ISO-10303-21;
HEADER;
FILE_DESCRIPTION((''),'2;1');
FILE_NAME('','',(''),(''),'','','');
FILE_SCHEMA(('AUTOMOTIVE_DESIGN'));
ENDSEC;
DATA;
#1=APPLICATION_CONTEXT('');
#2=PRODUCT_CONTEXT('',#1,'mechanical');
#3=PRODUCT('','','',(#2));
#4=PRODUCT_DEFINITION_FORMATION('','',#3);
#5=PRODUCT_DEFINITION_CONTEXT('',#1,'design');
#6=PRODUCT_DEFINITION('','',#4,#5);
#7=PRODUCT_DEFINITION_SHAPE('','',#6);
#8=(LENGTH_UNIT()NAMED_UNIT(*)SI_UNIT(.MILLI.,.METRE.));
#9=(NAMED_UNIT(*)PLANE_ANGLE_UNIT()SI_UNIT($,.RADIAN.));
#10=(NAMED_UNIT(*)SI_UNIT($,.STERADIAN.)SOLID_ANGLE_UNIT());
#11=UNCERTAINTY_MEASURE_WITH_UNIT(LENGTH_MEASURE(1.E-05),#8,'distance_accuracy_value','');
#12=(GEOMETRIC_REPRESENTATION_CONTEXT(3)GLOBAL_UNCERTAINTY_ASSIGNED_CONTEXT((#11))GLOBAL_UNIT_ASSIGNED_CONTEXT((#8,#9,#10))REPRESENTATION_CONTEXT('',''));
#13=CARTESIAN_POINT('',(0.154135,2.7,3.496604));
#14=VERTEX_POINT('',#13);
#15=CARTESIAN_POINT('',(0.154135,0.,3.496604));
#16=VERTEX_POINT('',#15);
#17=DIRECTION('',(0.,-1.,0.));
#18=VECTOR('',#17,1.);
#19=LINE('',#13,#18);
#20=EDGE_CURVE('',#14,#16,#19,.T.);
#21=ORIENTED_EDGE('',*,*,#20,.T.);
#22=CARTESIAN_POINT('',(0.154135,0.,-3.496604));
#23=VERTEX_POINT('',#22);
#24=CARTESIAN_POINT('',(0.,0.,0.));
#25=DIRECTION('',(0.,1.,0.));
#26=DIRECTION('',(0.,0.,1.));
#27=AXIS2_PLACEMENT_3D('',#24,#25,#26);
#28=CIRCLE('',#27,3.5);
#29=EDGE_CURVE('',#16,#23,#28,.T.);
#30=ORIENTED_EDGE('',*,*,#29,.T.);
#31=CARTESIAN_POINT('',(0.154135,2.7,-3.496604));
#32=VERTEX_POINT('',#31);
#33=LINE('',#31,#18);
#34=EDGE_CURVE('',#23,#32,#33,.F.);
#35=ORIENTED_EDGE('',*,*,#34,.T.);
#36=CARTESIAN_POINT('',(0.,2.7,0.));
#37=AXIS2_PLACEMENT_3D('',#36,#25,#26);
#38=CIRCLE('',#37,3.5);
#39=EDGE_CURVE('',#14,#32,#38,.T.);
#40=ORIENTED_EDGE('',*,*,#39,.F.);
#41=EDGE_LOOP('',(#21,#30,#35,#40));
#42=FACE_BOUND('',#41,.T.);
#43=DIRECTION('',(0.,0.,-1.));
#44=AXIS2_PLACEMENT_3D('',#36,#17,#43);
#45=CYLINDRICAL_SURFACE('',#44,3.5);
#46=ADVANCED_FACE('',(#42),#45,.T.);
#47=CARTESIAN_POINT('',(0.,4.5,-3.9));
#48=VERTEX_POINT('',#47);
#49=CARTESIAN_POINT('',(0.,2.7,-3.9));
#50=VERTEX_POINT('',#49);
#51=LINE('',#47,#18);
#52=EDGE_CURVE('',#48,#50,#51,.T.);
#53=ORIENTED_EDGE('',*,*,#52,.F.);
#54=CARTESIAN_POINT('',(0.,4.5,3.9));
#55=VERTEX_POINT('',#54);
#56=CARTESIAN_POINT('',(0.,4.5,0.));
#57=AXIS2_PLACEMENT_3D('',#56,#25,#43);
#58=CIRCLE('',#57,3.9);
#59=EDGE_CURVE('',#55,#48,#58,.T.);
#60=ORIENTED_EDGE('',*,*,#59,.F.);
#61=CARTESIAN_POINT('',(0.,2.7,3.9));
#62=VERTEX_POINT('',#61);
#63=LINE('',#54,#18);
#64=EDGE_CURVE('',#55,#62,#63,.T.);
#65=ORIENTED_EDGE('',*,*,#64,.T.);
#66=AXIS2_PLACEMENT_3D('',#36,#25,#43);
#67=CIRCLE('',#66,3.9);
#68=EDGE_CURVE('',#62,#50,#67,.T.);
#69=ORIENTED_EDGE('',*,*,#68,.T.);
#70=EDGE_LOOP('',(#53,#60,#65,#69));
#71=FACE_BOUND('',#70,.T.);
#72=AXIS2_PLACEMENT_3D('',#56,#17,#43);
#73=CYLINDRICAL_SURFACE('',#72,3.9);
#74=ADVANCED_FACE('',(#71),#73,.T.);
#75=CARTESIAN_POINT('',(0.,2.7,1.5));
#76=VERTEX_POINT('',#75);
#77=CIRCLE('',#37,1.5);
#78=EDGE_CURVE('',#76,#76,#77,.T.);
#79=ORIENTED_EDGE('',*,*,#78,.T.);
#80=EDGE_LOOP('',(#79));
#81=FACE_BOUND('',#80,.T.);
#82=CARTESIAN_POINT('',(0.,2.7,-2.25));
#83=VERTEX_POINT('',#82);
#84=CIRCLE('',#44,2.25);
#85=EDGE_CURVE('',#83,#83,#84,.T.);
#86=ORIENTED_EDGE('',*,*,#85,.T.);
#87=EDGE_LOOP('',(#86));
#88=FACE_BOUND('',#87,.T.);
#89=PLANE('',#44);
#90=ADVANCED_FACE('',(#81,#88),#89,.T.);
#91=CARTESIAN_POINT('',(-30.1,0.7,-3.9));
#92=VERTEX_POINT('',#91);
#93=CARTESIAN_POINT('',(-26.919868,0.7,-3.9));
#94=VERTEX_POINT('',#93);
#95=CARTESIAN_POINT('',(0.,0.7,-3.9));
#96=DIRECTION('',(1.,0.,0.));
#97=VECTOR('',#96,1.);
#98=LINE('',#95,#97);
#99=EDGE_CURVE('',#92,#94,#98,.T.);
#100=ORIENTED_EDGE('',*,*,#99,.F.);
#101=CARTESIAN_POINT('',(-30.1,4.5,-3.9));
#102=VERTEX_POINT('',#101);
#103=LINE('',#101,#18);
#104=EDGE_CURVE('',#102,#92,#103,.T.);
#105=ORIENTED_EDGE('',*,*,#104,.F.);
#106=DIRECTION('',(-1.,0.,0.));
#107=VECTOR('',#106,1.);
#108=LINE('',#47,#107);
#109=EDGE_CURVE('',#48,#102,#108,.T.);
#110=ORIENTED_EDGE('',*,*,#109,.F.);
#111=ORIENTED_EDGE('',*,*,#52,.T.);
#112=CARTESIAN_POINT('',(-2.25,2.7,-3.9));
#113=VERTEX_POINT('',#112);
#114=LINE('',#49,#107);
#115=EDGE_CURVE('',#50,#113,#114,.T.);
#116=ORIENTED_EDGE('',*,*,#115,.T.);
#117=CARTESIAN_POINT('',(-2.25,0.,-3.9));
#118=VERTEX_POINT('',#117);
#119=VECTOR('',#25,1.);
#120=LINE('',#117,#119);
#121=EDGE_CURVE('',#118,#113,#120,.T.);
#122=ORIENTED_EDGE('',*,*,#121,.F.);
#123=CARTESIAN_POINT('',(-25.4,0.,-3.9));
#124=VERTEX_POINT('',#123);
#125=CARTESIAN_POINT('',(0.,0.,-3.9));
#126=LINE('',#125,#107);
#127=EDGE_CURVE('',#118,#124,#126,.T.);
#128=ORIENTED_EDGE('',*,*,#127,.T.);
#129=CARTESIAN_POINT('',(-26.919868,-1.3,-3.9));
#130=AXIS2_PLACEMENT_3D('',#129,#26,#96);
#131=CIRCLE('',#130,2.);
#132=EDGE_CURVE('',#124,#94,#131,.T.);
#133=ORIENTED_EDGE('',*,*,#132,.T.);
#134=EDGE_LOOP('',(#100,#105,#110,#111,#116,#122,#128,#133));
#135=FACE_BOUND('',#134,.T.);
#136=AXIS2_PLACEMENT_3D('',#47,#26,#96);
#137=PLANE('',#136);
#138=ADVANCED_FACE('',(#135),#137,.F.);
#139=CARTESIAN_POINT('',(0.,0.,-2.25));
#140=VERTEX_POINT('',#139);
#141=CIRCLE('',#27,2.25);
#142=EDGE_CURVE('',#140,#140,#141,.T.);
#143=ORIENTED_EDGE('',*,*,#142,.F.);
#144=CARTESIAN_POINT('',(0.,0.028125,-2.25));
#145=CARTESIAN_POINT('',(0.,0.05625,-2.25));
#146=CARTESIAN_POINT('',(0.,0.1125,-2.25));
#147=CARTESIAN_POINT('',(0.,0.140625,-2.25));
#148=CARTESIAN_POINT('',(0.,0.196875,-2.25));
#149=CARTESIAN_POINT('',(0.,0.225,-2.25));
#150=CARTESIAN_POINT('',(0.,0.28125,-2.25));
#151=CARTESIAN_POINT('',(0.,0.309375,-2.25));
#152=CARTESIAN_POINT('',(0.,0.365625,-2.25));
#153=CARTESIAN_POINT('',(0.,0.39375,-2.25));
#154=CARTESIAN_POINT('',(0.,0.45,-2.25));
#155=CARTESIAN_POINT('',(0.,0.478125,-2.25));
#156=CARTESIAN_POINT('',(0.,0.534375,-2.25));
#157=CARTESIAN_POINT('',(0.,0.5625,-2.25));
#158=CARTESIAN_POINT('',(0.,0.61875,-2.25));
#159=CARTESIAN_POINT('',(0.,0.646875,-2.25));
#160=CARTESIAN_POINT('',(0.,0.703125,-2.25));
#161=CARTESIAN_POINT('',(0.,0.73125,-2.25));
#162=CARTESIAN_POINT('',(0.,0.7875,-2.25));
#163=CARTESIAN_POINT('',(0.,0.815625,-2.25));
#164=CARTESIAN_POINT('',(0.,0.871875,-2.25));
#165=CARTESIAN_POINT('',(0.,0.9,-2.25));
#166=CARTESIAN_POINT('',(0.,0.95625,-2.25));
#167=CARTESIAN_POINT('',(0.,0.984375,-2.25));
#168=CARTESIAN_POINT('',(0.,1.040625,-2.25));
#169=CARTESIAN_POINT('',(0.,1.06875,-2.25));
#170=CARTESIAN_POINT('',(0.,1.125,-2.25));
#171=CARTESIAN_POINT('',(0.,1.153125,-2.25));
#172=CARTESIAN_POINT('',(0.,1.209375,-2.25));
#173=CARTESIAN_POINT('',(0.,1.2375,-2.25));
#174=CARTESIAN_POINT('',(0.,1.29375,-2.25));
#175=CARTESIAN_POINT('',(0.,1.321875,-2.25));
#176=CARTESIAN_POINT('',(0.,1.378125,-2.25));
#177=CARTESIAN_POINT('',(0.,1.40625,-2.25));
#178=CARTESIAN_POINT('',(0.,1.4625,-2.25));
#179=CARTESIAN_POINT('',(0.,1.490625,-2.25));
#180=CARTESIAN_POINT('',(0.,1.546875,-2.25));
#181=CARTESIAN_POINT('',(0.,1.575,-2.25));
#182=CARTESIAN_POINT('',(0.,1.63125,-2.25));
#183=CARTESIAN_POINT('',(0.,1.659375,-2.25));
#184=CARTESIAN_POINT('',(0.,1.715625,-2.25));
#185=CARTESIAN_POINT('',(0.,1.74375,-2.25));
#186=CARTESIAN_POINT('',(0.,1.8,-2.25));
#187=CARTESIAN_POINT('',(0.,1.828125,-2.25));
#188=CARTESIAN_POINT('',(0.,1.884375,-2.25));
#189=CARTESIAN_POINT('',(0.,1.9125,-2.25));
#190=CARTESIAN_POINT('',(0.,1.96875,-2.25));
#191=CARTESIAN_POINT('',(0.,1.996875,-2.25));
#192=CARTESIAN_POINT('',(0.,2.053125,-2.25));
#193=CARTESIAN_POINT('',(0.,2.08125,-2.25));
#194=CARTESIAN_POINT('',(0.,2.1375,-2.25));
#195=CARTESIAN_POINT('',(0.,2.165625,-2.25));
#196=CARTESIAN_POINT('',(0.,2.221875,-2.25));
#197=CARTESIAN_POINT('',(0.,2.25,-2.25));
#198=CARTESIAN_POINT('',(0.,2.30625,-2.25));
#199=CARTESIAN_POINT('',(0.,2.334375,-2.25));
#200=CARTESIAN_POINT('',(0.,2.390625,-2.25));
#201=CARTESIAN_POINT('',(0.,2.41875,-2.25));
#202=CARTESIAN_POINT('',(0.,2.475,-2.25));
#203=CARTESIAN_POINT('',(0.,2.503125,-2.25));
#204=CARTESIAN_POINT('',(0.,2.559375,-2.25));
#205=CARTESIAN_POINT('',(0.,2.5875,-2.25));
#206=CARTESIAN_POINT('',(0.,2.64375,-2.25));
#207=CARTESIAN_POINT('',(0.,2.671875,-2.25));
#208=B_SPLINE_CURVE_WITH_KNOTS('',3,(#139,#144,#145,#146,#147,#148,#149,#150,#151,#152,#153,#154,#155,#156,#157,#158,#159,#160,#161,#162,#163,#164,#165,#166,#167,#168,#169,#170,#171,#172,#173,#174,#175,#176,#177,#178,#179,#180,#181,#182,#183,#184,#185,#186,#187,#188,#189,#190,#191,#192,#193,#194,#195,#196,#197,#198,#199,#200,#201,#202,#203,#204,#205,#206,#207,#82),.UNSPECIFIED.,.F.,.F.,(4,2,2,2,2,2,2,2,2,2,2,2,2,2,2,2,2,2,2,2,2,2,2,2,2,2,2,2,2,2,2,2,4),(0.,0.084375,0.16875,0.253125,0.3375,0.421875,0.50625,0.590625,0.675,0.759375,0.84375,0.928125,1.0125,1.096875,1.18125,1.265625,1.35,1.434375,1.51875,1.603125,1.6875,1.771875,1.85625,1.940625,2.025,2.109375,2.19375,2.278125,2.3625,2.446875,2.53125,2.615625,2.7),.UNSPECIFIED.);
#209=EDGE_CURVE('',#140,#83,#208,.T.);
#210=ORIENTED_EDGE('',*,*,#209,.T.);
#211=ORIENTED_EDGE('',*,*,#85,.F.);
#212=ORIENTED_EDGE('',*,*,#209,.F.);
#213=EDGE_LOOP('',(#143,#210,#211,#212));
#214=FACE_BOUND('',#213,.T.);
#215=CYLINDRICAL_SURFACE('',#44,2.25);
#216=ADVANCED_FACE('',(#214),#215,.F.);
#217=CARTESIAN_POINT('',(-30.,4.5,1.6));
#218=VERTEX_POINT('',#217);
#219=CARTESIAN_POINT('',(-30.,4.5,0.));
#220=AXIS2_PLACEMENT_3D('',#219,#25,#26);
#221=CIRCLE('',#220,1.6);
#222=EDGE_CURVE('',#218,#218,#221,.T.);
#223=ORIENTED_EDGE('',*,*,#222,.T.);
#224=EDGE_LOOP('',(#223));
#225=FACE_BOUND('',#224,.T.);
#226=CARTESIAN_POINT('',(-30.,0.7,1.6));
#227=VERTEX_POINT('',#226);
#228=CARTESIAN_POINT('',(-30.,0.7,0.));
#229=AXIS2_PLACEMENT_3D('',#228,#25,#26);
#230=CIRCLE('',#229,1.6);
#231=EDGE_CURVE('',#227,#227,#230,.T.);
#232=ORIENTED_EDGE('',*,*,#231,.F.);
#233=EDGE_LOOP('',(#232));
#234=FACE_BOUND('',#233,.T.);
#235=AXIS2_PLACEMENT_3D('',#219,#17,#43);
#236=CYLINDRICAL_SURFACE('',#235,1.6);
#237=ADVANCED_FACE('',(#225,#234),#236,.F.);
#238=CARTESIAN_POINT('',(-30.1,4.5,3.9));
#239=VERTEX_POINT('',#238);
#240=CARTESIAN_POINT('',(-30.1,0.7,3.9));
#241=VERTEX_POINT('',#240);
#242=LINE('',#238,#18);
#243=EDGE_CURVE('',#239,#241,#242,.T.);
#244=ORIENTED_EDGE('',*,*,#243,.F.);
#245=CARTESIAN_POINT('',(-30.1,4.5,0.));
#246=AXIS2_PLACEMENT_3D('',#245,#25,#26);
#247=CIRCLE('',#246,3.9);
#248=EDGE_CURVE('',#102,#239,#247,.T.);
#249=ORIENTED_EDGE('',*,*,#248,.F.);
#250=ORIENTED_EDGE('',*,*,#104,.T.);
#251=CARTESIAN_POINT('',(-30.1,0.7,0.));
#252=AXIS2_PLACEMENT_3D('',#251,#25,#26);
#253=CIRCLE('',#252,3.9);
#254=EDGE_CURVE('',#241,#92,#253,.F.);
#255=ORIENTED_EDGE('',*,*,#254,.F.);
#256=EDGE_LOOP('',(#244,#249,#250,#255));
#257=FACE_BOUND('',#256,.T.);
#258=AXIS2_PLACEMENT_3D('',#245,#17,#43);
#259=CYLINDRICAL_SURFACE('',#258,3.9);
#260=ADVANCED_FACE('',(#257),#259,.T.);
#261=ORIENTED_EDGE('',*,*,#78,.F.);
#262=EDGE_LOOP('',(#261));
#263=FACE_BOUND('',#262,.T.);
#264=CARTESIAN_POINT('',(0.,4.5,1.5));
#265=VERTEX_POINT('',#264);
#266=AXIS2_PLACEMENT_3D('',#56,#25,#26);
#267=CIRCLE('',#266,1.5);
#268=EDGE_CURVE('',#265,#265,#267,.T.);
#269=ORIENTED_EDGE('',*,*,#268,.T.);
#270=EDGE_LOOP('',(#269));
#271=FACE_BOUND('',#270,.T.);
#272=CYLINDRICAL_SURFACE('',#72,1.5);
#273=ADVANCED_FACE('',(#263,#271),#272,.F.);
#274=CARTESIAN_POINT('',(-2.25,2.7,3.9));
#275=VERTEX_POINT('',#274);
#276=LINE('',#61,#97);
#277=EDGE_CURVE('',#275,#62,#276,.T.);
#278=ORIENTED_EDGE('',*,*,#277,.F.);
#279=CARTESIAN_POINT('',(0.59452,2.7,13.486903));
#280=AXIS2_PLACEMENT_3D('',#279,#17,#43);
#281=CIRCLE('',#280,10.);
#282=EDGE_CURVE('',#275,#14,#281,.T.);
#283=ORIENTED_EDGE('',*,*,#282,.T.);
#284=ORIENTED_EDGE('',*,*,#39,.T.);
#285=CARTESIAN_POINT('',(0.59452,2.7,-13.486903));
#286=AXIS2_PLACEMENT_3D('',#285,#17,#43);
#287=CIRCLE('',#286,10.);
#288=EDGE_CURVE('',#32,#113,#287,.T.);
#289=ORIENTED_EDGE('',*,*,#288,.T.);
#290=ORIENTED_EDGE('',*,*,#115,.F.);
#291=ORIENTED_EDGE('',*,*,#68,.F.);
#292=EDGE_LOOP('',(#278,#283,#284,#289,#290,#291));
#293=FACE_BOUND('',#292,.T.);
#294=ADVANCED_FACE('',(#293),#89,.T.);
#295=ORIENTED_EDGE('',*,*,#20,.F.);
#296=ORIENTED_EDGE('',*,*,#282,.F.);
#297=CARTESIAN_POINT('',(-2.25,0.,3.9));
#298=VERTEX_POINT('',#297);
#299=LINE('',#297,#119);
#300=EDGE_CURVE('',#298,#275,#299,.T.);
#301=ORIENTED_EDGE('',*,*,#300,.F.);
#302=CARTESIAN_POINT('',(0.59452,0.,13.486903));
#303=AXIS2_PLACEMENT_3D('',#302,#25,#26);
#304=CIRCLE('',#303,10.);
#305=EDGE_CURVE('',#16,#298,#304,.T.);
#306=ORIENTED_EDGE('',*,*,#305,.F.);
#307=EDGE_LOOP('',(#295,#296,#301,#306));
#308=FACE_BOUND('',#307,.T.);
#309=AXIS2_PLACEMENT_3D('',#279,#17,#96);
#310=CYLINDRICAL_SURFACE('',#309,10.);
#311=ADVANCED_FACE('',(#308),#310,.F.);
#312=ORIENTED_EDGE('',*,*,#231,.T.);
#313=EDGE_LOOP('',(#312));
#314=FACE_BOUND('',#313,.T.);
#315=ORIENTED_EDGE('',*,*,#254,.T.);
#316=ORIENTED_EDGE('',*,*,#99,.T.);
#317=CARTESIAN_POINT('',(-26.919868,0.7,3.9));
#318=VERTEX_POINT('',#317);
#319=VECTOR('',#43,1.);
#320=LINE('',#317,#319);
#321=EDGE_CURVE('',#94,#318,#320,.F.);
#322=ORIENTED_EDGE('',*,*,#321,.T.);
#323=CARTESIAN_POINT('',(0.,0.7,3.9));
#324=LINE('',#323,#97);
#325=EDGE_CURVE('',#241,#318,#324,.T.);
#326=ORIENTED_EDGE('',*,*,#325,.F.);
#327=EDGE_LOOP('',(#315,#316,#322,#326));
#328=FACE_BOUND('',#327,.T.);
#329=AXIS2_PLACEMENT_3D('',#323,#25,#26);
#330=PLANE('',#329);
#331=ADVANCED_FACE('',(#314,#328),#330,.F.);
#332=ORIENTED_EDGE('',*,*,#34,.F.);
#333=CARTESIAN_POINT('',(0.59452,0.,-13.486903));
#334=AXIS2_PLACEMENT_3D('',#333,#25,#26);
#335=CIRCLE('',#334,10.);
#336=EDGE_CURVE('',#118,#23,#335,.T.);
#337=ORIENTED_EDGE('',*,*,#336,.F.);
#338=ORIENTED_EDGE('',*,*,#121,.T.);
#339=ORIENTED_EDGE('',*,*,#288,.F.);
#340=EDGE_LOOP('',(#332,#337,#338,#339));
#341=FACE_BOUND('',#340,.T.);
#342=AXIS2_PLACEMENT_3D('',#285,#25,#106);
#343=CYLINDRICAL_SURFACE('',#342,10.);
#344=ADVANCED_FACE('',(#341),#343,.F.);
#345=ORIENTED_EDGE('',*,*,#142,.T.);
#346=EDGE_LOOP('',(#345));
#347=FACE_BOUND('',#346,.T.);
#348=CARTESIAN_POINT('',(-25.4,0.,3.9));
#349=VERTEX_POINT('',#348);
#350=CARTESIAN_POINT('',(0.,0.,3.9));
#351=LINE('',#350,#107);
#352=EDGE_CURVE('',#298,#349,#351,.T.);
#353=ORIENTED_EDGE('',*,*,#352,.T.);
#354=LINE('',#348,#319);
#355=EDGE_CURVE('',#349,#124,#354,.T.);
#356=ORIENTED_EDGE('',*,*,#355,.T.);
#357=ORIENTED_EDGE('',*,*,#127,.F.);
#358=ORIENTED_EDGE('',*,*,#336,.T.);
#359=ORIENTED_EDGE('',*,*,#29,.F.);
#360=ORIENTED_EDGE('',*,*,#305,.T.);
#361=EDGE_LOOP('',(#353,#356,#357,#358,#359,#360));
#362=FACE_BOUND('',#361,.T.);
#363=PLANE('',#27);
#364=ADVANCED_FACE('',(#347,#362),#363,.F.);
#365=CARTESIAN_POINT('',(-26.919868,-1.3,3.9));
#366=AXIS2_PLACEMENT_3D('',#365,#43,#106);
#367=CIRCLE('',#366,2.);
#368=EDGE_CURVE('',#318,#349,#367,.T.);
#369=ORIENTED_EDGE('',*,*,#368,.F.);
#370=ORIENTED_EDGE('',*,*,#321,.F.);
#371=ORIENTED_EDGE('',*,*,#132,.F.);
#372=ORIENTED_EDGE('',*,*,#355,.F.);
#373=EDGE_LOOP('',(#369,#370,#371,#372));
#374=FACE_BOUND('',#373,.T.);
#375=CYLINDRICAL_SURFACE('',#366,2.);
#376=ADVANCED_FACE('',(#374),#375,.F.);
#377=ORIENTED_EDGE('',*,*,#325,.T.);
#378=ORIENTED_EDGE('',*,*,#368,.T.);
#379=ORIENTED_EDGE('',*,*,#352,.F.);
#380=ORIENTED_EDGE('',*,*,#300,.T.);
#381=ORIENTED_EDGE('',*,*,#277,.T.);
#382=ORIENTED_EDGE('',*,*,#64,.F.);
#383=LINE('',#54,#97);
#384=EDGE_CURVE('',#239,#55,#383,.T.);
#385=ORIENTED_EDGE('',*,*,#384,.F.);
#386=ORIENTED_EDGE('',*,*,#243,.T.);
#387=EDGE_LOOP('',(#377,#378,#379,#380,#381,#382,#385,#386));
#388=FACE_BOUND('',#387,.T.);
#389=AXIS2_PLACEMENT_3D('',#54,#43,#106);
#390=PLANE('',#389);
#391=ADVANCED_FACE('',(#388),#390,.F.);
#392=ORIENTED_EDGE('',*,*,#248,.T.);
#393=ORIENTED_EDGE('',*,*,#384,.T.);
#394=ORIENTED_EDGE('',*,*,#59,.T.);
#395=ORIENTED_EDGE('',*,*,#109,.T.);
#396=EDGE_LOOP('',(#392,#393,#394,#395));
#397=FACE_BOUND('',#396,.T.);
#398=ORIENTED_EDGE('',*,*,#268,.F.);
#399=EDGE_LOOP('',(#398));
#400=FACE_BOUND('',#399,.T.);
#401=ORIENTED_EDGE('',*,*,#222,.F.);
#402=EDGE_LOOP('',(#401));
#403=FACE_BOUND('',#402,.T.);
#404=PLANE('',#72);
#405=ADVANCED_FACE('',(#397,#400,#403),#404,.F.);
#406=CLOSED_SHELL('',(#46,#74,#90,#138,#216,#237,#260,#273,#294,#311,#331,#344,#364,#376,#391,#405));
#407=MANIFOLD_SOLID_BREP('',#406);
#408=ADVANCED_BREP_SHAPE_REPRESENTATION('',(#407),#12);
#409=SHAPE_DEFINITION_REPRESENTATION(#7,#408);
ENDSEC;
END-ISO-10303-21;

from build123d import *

# Parameters (mm, degrees)
SKETCH1_R              = 3.5
SKETCH1_R_2            = 2.25
BOSS_EXTRUDE1_DEPTH    = 2.7
SKETCH2_R              = 1.6
SKETCH2_R_2            = 1.5
BOSS_EXTRUDE2_DEPTH    = 1.8
BOSS_EXTRUDE3_DEPTH    = 3.9
FILLET1_R              = 10
CUT_EXTRUDE1_START     = -2
CUT_EXTRUDE1_OUTLINE_R = 1.6
CUT_EXTRUDE1_DEPTH     = 2
FILLET2_R              = 2


# Read off the part's stored shape, not the designer's step: Cut-Extrude1
with BuildPart() as part:
    # Sketch1 → Boss-Extrude1 (new body)
    with BuildSketch(Plane(origin=(0, 0, 0), x_dir=(1, 0, 0), z_dir=(0, 1, 0))):
        with Locations(Location((0, 0, 0), (0, 0, 90))):
            Circle(SKETCH1_R)
        with Locations(Location((0, 0, 0), (0, 0, 90))):
            Circle(SKETCH1_R_2, mode=Mode.SUBTRACT)
    extrude(amount=BOSS_EXTRUDE1_DEPTH)

    # Sketch2 → Boss-Extrude2 (add)
    with BuildSketch(Plane(origin=(0, 2.7, 0), x_dir=(1, 0, 0), z_dir=(0, 1, 0))):
        with BuildLine():
            Line((0, 3.9), (-30.1, 3.9))
            ThreePointArc((-30.1, 3.9), (-34, 0), (-30.1, -3.9))
            Line((-30.1, -3.9), (0, -3.9))
            ThreePointArc((0, -3.9), (3.9, 0), (0, 3.9))
        make_face()
        with Locations(Location((-30, 0, 0), (0, 0, 270))):
            Circle(SKETCH2_R, mode=Mode.SUBTRACT)
        with Locations(Location((0, 0, 0), (0, 0, 270))):
            Circle(SKETCH2_R_2, mode=Mode.SUBTRACT)
    extrude(amount=BOSS_EXTRUDE2_DEPTH)

    # Sketch3 → Boss-Extrude3 (add, symmetric)
    with BuildSketch(Plane.XY):
        Polygon((-25.4, 2.7), (-2.25, 2.7), (-2.25, 0), (-3.5, 0), (-25.4, 0), align=None)
        Polygon((-34, 0.7), (-25.4, 0.7), (-25.4, 2.7), (-28.4, 2.7), (-31.6, 2.7), (-34, 2.7), align=None)
    extrude(amount=BOSS_EXTRUDE3_DEPTH, both=True)

    # Fillet1
    # the kernel refuses this fillet: 10 mm, written as the material it adds along each edge
    with BuildSketch(Plane(origin=(-2.25, 2.7, -2.680951324), x_dir=(0.9469829588957737, 0, -0.3212837928701128), z_dir=(0, -1, 0))) as fillet1_piece_1:
        with BuildLine():
            CenterArc((6.165489318, -9.319153575), FILLET1_R, 111.264619874, 14.002057775)
            Line((0.391660582, -1.154418323), (0.276184008, -0.991123617))
            ThreePointArc((0.276184008, -0.991123617), (0.006433699, -0.64146592), (-0.189396592, -0.064256759))
            Line((-0.189396592, -0.064256759), (0.072535168, 0.186383071))
            ThreePointArc((0.072535168, 0.186383071), (1.269365448, -0.038296249), (2.466195727, 0.186383071))
            Line((2.466195727, 0.186383071), (2.538730895, 0))
        make_face()
    extrude(amount=2.7)
    with BuildSketch(Plane(origin=(-2.25, 2.7, 2.680951324), x_dir=(1.3741079680414238e-12, 0, 1.0), z_dir=(0, -1, 0))) as fillet1_piece_2:
        with BuildLine():
            CenterArc((10.805951419, -2.84452031), FILLET1_R, 163.473903362, 14.002057775)
            Line((0.815653091, -2.404134895), (0.615847125, -2.395327187))
            ThreePointArc((0.615847125, -2.395327187), (0.444092441, -1.189763484), (-0.153197218, -0.128571429))
            Line((-0.153197218, -0.128571429), (0, 0.2))
            ThreePointArc((0, 0.2), (0.609524338, 0.2), (1.027310621, 0.056890406))
            Line((1.027310621, 0.056890406), (1.219048676, 0))
        make_face()
    extrude(amount=2.7)

    # Cut-Extrude1 outline → Cut-Extrude1 (cut)
    with BuildSketch(Plane(origin=(0, 2.7, 0), x_dir=(1, 0, 0), z_dir=(0, 1, 0)).offset(CUT_EXTRUDE1_START)):
        with BuildLine():
            Line((-34, -3.9), (-30.1, -3.9))
            ThreePointArc((-30.1, -3.9), (-32.857716447, -2.757716447), (-34, 0))
            Line((-34, 0), (-34, -3.9))
        make_face()
        with BuildLine():
            Line((-34, 3.9), (-34, 0))
            ThreePointArc((-34, 0), (-32.857716447, 2.757716447), (-30.1, 3.9))
            Line((-30.1, 3.9), (-34, 3.9))
        make_face()
        with Locations((-30, 0)):
            Circle(CUT_EXTRUDE1_OUTLINE_R)
    extrude(amount=CUT_EXTRUDE1_DEPTH, mode=Mode.SUBTRACT)

    # Fillet2
    # the kernel refuses this fillet: 2 mm, written as the material it adds along each edge
    with BuildSketch(Plane(origin=(-25.4, 0.7, -3.9), x_dir=(-1, 0, 0), z_dir=(0, 0, 1))) as fillet2_piece_1:
        with BuildLine():
            CenterArc((1.519868415, 2), FILLET2_R, 220.541601874, 49.458398126)
            Line((0, 0.7), (-0.030397368, 0.674))
            ThreePointArc((-0.030397368, 0.674), (-0.04, 0.35), (-0.04, 0))
            Line((-0.04, 0), (0, -0.04))
            Line((0, -0.04), (1.519868415, -0.04))
            Line((1.519868415, -0.04), (1.519868415, 0))
        make_face()
    extrude(amount=7.8)


solid = part.part
